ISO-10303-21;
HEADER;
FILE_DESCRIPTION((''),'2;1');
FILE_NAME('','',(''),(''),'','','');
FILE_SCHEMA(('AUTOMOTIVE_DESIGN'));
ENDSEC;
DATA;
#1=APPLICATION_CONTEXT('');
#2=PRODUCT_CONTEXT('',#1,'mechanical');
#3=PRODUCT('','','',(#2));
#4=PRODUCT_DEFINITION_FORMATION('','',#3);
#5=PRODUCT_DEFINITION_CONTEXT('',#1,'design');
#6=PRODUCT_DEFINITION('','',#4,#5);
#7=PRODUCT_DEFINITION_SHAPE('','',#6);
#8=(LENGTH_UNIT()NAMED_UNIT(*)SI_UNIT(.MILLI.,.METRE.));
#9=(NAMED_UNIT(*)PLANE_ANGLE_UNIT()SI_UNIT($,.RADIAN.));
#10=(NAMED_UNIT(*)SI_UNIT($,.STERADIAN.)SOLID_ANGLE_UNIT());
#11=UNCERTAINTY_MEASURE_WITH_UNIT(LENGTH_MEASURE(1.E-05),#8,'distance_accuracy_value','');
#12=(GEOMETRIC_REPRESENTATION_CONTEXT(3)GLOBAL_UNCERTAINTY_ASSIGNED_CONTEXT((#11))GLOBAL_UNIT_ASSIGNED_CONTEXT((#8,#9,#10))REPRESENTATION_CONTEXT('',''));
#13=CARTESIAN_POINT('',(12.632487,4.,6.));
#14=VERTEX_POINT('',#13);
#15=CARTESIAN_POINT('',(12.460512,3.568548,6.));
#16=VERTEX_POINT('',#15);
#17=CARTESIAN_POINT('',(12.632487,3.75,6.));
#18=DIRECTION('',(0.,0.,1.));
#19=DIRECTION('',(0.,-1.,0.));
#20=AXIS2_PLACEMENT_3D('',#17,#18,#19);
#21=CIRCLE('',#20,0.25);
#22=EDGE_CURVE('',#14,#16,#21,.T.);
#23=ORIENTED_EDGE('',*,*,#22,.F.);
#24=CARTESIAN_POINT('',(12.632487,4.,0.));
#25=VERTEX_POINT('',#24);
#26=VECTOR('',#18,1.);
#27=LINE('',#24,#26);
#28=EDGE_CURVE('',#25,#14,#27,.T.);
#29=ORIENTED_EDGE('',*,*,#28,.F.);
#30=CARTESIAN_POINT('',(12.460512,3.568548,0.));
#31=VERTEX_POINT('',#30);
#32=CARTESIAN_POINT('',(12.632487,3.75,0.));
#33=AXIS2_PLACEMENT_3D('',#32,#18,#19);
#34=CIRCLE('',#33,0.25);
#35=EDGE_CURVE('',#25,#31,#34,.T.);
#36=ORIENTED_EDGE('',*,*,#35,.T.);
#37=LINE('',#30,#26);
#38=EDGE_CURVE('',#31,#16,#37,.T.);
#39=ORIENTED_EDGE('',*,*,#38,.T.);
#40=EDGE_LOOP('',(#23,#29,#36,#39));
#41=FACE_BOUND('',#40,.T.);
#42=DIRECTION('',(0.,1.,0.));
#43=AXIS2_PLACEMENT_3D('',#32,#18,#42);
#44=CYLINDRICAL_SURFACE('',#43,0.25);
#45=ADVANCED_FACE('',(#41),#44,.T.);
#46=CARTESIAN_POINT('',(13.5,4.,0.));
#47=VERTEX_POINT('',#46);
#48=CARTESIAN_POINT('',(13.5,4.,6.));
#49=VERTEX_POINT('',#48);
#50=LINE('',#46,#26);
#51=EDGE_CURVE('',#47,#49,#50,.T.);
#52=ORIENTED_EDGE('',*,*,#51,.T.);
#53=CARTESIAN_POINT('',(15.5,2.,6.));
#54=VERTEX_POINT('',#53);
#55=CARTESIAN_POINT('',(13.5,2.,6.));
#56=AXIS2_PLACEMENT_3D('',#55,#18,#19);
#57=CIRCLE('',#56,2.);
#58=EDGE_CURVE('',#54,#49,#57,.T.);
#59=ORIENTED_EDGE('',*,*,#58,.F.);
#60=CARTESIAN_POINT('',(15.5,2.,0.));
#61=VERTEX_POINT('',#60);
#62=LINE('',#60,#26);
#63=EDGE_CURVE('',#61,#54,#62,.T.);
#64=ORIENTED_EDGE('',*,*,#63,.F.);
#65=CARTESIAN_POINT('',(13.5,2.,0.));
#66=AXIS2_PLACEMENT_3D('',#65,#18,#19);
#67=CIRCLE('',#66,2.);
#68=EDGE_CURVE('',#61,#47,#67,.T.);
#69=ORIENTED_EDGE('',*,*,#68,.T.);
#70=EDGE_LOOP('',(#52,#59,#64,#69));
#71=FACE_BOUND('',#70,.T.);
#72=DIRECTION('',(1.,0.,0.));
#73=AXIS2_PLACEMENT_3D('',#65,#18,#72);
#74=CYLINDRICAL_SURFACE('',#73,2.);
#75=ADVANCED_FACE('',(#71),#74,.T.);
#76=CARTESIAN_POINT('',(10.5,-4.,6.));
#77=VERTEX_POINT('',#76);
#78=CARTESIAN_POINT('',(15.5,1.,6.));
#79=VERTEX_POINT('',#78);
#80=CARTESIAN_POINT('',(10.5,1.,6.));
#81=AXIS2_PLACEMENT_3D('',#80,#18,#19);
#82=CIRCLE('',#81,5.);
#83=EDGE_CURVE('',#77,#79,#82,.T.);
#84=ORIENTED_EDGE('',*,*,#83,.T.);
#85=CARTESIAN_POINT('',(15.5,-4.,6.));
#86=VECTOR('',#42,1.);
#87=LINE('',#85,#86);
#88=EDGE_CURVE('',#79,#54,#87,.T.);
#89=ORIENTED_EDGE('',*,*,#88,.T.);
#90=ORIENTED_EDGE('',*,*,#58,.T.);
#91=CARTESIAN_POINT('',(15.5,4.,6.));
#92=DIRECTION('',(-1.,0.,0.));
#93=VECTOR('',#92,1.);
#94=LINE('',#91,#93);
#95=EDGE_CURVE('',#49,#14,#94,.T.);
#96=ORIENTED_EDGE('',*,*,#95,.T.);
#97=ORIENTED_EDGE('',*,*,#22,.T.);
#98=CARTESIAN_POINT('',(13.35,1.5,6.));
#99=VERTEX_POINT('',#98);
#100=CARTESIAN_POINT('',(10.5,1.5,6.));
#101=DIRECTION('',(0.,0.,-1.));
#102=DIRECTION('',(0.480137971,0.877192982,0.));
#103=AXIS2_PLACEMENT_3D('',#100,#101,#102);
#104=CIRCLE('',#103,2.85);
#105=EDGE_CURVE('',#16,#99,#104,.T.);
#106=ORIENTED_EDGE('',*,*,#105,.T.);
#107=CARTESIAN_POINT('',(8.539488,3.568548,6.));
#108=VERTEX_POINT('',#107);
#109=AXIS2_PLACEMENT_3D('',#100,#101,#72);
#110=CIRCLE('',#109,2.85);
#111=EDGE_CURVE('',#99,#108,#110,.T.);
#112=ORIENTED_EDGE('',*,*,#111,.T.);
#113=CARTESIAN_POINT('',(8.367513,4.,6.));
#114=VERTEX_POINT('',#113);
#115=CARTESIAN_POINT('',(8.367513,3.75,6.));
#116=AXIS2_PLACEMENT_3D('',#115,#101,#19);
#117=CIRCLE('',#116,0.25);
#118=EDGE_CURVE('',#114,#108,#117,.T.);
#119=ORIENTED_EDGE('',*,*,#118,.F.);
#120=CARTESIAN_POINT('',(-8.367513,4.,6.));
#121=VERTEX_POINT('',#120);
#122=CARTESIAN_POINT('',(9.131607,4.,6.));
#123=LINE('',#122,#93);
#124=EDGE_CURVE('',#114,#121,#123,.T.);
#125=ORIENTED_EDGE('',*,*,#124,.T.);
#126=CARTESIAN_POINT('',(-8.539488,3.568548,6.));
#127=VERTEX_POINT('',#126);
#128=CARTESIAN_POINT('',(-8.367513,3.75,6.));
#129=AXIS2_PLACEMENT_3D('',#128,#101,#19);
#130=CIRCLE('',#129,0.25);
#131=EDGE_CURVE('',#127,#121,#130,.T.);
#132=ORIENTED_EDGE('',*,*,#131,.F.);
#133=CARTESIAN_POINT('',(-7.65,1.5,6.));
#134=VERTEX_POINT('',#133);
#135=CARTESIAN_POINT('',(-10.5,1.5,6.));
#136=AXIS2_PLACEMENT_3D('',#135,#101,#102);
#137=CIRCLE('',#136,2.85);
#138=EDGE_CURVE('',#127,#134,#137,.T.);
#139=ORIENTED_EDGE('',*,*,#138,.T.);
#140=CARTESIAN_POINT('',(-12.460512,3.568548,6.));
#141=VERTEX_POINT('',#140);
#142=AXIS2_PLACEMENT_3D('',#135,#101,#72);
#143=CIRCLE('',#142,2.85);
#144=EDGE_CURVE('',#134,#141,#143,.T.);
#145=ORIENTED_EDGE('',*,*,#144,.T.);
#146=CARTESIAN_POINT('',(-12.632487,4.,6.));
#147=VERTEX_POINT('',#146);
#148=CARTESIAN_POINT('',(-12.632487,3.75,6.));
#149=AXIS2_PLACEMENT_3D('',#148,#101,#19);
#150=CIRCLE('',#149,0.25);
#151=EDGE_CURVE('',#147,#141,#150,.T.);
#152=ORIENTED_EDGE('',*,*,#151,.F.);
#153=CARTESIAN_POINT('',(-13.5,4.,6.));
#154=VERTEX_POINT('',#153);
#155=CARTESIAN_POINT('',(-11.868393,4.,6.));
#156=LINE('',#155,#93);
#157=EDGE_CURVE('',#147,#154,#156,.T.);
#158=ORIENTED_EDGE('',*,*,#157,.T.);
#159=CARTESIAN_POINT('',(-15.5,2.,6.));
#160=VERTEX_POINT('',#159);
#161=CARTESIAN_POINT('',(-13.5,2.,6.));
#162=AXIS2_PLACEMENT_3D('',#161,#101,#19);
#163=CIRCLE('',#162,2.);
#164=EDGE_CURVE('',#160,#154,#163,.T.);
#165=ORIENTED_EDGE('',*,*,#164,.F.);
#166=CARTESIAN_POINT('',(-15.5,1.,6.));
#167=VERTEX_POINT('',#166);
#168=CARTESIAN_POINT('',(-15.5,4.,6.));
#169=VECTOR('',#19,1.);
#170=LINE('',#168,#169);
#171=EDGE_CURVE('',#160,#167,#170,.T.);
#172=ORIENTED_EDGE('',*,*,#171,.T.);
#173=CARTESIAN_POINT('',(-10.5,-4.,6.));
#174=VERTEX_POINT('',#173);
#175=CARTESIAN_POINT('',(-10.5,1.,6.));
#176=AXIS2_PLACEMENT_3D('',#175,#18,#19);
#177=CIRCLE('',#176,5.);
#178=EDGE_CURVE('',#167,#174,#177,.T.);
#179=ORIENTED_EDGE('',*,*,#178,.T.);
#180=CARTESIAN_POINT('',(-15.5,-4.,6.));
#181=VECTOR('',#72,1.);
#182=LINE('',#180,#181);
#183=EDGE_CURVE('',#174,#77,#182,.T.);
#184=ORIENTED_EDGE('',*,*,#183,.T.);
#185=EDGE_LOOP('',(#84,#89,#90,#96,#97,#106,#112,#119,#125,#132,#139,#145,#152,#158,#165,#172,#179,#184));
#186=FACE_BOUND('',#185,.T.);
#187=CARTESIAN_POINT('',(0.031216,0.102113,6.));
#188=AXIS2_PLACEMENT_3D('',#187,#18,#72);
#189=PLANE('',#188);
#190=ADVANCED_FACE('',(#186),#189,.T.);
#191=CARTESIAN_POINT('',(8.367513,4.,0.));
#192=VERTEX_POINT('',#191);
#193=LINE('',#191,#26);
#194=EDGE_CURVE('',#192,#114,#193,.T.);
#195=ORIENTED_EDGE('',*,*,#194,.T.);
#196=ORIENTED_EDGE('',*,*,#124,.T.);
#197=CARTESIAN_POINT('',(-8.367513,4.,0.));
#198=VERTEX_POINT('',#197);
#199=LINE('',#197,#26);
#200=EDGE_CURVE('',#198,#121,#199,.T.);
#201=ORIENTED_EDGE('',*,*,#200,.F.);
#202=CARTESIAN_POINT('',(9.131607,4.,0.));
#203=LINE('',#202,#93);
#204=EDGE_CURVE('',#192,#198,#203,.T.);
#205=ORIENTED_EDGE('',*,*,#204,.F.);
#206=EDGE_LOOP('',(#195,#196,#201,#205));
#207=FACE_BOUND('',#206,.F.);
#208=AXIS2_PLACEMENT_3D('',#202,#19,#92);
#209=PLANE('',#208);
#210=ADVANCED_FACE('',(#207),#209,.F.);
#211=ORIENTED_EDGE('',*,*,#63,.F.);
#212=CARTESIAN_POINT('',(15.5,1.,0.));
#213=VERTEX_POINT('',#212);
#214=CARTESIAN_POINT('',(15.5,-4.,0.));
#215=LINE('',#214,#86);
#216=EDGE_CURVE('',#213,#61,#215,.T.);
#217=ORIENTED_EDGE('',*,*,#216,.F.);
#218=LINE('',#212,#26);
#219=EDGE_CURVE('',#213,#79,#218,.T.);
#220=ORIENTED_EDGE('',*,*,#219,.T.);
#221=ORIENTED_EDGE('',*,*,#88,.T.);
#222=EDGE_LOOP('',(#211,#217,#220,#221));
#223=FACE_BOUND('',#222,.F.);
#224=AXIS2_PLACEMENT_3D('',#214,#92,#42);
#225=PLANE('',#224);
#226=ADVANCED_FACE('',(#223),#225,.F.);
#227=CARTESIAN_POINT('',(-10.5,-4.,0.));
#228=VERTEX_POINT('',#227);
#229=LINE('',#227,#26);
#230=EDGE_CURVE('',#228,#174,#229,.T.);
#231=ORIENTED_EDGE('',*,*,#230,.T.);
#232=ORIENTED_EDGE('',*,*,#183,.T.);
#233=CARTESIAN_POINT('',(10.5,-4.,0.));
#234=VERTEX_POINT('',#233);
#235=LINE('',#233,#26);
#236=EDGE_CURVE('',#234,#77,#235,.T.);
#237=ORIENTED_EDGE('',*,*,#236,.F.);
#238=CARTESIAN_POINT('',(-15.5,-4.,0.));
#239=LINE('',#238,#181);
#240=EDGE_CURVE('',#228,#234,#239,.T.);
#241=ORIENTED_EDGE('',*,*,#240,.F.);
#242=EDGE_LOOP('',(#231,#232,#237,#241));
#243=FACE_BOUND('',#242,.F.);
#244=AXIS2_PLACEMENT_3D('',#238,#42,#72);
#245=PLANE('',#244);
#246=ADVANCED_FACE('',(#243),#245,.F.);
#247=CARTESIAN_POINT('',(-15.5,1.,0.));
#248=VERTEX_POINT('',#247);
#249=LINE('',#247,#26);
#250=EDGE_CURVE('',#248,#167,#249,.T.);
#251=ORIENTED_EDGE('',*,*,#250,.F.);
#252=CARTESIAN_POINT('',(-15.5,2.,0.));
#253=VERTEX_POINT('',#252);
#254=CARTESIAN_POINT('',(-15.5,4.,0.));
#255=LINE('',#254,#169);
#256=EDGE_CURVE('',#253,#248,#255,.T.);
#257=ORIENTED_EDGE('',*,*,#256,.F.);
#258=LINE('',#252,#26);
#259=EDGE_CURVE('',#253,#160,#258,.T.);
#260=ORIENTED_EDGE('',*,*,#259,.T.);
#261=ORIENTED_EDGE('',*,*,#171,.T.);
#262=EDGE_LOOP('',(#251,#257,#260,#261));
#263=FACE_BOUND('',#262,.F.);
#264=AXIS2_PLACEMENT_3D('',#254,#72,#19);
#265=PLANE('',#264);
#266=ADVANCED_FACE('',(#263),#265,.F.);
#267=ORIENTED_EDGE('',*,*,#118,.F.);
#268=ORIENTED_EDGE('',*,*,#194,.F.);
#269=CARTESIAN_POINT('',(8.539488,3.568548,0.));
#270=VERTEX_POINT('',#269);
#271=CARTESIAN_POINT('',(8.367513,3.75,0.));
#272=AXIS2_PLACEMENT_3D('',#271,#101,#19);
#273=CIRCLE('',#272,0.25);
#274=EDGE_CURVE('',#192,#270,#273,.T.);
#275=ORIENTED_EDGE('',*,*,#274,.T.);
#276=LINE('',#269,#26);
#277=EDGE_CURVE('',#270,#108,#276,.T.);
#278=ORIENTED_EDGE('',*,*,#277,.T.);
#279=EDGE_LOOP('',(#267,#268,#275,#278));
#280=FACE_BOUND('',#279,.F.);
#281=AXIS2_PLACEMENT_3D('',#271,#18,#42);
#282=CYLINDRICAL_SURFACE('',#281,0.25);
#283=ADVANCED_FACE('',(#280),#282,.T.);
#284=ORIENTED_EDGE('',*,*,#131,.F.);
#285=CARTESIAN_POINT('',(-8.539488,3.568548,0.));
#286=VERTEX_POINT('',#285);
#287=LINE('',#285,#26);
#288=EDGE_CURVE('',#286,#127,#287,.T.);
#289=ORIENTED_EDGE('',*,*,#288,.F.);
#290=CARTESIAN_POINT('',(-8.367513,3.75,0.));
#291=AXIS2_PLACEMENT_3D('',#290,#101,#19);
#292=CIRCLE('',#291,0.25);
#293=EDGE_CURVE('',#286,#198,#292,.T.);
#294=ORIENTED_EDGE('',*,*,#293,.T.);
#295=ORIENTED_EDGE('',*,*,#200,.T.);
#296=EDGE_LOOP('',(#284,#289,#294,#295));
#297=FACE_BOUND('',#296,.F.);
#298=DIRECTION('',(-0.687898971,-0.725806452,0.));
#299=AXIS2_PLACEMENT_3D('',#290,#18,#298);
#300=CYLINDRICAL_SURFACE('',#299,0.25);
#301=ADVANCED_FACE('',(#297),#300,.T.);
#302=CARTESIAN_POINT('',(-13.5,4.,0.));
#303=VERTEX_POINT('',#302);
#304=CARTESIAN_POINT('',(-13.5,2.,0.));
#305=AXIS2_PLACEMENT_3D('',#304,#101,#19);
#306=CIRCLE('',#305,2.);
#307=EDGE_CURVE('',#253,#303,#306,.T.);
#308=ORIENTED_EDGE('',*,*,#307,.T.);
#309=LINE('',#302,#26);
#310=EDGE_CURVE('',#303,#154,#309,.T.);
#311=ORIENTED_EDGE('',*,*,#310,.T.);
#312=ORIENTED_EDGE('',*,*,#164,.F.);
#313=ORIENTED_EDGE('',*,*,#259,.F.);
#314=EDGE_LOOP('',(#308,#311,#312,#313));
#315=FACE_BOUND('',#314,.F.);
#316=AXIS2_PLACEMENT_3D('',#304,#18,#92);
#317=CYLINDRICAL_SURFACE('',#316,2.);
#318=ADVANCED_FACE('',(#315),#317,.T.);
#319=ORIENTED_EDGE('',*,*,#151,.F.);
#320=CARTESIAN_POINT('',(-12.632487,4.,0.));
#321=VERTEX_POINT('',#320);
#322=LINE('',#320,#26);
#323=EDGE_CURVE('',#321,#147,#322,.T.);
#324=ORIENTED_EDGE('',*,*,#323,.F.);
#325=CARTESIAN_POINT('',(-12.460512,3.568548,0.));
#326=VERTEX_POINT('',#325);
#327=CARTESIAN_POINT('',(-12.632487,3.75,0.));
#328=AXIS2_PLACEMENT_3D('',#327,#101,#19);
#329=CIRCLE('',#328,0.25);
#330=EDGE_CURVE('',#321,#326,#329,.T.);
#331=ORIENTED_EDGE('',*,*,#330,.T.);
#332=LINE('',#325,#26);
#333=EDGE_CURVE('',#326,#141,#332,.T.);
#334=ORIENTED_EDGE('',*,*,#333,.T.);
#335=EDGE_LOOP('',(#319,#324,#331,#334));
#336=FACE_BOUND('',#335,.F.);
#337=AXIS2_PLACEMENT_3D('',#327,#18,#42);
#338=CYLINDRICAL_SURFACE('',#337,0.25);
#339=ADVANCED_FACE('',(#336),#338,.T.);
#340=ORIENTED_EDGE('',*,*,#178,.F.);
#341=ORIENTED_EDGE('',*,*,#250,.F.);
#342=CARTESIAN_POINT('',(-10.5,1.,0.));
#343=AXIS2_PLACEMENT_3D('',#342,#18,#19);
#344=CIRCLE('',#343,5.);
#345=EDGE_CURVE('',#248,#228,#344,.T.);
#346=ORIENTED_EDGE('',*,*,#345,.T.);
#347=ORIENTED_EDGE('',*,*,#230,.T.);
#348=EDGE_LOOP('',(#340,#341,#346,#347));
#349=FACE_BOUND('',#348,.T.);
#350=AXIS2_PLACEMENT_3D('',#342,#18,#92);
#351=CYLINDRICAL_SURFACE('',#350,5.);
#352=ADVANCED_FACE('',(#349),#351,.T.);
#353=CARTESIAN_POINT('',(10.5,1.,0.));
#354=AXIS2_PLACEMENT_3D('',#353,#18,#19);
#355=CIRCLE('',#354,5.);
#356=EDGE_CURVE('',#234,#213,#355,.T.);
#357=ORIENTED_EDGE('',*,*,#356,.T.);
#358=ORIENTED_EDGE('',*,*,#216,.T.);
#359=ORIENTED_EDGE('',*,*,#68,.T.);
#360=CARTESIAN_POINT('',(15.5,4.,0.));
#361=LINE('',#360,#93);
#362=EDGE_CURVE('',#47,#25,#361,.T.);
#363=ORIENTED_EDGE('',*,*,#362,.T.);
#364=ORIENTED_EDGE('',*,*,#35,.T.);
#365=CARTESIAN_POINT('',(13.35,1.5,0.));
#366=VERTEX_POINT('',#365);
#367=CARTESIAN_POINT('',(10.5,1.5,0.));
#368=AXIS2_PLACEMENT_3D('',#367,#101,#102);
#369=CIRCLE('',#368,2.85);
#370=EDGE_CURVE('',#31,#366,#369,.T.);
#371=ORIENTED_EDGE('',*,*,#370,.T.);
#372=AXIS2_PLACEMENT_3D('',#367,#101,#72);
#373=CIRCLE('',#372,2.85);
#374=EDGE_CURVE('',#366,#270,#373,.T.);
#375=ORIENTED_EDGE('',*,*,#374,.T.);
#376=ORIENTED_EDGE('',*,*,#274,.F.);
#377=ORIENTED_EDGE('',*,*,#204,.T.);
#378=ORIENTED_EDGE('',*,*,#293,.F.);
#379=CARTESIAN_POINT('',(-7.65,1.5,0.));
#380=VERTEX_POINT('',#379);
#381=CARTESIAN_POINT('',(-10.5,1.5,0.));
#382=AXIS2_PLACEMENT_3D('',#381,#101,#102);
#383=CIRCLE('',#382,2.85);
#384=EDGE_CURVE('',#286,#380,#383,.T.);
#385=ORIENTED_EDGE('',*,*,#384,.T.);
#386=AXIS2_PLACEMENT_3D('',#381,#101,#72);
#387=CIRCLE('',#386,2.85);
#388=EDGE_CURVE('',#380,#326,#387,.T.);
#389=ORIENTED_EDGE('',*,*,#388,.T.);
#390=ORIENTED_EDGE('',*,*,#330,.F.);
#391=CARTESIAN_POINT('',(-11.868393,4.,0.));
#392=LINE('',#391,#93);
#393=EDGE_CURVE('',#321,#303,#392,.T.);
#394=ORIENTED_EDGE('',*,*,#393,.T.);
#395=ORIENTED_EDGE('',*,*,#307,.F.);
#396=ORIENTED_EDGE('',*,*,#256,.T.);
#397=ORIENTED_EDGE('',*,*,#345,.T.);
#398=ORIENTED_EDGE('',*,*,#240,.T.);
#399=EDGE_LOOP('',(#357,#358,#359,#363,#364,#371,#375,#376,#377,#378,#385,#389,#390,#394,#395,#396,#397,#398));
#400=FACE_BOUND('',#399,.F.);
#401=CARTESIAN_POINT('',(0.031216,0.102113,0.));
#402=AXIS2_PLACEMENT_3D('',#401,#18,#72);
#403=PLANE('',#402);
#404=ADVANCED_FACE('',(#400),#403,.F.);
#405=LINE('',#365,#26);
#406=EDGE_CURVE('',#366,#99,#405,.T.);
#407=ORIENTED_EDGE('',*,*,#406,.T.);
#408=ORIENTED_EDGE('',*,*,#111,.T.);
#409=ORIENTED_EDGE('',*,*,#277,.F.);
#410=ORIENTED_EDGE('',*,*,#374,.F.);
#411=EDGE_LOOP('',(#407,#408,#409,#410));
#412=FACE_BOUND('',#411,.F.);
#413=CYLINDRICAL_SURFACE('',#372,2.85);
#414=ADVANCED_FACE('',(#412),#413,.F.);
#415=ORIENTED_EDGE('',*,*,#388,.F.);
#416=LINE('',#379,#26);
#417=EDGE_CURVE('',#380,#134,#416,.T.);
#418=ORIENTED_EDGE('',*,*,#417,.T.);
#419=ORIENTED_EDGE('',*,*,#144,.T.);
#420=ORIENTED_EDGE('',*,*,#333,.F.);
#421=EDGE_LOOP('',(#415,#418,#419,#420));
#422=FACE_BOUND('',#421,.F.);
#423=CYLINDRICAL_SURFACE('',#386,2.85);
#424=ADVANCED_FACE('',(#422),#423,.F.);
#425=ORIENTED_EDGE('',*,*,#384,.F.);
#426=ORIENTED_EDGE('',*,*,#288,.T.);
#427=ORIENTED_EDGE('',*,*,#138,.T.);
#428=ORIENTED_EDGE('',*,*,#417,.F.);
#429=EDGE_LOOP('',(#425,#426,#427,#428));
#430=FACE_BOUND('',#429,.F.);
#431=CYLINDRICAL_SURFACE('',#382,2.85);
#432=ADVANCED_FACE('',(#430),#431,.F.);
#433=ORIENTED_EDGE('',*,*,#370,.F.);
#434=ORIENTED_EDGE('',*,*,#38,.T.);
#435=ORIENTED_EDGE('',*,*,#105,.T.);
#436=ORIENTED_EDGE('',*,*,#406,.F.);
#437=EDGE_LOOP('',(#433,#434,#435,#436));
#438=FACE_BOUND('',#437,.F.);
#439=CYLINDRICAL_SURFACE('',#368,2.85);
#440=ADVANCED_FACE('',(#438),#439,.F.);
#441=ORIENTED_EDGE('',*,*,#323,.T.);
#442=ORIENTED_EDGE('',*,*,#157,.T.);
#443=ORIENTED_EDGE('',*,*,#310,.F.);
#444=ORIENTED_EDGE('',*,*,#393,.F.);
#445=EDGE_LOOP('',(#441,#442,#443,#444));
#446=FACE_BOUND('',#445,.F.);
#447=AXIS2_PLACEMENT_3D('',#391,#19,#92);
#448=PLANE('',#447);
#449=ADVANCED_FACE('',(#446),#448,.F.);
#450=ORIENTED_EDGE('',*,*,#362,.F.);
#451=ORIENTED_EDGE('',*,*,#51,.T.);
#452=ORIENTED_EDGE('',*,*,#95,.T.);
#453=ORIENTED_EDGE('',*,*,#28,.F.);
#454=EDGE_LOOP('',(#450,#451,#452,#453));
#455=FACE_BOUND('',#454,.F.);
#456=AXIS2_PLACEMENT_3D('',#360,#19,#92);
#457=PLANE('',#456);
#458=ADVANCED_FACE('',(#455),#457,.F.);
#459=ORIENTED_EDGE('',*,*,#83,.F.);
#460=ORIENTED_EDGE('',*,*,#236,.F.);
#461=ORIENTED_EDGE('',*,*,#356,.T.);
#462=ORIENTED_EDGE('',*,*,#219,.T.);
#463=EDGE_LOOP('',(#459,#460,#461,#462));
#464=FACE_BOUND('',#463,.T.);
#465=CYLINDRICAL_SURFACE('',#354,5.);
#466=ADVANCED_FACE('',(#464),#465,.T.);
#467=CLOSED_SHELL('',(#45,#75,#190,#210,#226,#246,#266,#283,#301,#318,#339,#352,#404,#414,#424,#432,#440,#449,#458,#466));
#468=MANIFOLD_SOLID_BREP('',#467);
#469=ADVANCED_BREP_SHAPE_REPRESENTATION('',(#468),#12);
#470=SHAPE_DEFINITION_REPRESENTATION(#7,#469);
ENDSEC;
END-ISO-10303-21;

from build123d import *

# Parameters (mm, degrees)
F1_DEPTH = 6
F2_R     = 5
F3_R     = 2
F4_R     = 0.25


with BuildPart() as f1:
    # F0 (on Top) → F1 (new body)
    with BuildSketch(Plane.XY):
        with BuildLine():
            Line((-11.8683932183, 4), (-15.5, 4))
            Line((-15.5, 4), (-15.5, -4))
            Line((-15.5, -4), (15.5, -4))
            Line((15.5, -4), (15.5, 4))
            Line((15.5, 4), (11.8683932183, 4))
            ThreePointArc((11.8683932183, 4), (12.9517769752, 2.9530277574), (13.35, 1.5))
            ThreePointArc((13.35, 1.5), (9.0469722426, -0.9517769752), (9.1316067817, 4))
            Line((9.1316067817, 4), (-9.1316067817, 4))
            ThreePointArc((-9.1316067817, 4), (-8.0482230248, 2.9530277574), (-7.65, 1.5))
            ThreePointArc((-7.65, 1.5), (-11.9530277574, -0.9517769752), (-11.8683932183, 4))
        make_face()
    extrude(amount=F1_DEPTH)

    # F2
    f2_edges = [f1.edges().sort_by_distance(p)[0] for p in [
        (15.5, -4, 3),
        (-15.5, -4, 3),
    ]]
    fillet(f2_edges, radius=F2_R)

    # F3
    f3_edges = [f1.edges().sort_by_distance(p)[0] for p in [
        (-15.5, 4, 3),
        (15.5, 4, 3),
    ]]
    fillet(f3_edges, radius=F3_R)

    # F4
    f4_edges = [f1.edges().sort_by_distance(p)[0] for p in [
        (9.131607, 4, 3),
        (11.868393, 4, 3),
        (-9.131607, 4, 3),
        (-11.868393, 4, 3),
    ]]
    fillet(f4_edges, radius=F4_R)


solid = f1.part
